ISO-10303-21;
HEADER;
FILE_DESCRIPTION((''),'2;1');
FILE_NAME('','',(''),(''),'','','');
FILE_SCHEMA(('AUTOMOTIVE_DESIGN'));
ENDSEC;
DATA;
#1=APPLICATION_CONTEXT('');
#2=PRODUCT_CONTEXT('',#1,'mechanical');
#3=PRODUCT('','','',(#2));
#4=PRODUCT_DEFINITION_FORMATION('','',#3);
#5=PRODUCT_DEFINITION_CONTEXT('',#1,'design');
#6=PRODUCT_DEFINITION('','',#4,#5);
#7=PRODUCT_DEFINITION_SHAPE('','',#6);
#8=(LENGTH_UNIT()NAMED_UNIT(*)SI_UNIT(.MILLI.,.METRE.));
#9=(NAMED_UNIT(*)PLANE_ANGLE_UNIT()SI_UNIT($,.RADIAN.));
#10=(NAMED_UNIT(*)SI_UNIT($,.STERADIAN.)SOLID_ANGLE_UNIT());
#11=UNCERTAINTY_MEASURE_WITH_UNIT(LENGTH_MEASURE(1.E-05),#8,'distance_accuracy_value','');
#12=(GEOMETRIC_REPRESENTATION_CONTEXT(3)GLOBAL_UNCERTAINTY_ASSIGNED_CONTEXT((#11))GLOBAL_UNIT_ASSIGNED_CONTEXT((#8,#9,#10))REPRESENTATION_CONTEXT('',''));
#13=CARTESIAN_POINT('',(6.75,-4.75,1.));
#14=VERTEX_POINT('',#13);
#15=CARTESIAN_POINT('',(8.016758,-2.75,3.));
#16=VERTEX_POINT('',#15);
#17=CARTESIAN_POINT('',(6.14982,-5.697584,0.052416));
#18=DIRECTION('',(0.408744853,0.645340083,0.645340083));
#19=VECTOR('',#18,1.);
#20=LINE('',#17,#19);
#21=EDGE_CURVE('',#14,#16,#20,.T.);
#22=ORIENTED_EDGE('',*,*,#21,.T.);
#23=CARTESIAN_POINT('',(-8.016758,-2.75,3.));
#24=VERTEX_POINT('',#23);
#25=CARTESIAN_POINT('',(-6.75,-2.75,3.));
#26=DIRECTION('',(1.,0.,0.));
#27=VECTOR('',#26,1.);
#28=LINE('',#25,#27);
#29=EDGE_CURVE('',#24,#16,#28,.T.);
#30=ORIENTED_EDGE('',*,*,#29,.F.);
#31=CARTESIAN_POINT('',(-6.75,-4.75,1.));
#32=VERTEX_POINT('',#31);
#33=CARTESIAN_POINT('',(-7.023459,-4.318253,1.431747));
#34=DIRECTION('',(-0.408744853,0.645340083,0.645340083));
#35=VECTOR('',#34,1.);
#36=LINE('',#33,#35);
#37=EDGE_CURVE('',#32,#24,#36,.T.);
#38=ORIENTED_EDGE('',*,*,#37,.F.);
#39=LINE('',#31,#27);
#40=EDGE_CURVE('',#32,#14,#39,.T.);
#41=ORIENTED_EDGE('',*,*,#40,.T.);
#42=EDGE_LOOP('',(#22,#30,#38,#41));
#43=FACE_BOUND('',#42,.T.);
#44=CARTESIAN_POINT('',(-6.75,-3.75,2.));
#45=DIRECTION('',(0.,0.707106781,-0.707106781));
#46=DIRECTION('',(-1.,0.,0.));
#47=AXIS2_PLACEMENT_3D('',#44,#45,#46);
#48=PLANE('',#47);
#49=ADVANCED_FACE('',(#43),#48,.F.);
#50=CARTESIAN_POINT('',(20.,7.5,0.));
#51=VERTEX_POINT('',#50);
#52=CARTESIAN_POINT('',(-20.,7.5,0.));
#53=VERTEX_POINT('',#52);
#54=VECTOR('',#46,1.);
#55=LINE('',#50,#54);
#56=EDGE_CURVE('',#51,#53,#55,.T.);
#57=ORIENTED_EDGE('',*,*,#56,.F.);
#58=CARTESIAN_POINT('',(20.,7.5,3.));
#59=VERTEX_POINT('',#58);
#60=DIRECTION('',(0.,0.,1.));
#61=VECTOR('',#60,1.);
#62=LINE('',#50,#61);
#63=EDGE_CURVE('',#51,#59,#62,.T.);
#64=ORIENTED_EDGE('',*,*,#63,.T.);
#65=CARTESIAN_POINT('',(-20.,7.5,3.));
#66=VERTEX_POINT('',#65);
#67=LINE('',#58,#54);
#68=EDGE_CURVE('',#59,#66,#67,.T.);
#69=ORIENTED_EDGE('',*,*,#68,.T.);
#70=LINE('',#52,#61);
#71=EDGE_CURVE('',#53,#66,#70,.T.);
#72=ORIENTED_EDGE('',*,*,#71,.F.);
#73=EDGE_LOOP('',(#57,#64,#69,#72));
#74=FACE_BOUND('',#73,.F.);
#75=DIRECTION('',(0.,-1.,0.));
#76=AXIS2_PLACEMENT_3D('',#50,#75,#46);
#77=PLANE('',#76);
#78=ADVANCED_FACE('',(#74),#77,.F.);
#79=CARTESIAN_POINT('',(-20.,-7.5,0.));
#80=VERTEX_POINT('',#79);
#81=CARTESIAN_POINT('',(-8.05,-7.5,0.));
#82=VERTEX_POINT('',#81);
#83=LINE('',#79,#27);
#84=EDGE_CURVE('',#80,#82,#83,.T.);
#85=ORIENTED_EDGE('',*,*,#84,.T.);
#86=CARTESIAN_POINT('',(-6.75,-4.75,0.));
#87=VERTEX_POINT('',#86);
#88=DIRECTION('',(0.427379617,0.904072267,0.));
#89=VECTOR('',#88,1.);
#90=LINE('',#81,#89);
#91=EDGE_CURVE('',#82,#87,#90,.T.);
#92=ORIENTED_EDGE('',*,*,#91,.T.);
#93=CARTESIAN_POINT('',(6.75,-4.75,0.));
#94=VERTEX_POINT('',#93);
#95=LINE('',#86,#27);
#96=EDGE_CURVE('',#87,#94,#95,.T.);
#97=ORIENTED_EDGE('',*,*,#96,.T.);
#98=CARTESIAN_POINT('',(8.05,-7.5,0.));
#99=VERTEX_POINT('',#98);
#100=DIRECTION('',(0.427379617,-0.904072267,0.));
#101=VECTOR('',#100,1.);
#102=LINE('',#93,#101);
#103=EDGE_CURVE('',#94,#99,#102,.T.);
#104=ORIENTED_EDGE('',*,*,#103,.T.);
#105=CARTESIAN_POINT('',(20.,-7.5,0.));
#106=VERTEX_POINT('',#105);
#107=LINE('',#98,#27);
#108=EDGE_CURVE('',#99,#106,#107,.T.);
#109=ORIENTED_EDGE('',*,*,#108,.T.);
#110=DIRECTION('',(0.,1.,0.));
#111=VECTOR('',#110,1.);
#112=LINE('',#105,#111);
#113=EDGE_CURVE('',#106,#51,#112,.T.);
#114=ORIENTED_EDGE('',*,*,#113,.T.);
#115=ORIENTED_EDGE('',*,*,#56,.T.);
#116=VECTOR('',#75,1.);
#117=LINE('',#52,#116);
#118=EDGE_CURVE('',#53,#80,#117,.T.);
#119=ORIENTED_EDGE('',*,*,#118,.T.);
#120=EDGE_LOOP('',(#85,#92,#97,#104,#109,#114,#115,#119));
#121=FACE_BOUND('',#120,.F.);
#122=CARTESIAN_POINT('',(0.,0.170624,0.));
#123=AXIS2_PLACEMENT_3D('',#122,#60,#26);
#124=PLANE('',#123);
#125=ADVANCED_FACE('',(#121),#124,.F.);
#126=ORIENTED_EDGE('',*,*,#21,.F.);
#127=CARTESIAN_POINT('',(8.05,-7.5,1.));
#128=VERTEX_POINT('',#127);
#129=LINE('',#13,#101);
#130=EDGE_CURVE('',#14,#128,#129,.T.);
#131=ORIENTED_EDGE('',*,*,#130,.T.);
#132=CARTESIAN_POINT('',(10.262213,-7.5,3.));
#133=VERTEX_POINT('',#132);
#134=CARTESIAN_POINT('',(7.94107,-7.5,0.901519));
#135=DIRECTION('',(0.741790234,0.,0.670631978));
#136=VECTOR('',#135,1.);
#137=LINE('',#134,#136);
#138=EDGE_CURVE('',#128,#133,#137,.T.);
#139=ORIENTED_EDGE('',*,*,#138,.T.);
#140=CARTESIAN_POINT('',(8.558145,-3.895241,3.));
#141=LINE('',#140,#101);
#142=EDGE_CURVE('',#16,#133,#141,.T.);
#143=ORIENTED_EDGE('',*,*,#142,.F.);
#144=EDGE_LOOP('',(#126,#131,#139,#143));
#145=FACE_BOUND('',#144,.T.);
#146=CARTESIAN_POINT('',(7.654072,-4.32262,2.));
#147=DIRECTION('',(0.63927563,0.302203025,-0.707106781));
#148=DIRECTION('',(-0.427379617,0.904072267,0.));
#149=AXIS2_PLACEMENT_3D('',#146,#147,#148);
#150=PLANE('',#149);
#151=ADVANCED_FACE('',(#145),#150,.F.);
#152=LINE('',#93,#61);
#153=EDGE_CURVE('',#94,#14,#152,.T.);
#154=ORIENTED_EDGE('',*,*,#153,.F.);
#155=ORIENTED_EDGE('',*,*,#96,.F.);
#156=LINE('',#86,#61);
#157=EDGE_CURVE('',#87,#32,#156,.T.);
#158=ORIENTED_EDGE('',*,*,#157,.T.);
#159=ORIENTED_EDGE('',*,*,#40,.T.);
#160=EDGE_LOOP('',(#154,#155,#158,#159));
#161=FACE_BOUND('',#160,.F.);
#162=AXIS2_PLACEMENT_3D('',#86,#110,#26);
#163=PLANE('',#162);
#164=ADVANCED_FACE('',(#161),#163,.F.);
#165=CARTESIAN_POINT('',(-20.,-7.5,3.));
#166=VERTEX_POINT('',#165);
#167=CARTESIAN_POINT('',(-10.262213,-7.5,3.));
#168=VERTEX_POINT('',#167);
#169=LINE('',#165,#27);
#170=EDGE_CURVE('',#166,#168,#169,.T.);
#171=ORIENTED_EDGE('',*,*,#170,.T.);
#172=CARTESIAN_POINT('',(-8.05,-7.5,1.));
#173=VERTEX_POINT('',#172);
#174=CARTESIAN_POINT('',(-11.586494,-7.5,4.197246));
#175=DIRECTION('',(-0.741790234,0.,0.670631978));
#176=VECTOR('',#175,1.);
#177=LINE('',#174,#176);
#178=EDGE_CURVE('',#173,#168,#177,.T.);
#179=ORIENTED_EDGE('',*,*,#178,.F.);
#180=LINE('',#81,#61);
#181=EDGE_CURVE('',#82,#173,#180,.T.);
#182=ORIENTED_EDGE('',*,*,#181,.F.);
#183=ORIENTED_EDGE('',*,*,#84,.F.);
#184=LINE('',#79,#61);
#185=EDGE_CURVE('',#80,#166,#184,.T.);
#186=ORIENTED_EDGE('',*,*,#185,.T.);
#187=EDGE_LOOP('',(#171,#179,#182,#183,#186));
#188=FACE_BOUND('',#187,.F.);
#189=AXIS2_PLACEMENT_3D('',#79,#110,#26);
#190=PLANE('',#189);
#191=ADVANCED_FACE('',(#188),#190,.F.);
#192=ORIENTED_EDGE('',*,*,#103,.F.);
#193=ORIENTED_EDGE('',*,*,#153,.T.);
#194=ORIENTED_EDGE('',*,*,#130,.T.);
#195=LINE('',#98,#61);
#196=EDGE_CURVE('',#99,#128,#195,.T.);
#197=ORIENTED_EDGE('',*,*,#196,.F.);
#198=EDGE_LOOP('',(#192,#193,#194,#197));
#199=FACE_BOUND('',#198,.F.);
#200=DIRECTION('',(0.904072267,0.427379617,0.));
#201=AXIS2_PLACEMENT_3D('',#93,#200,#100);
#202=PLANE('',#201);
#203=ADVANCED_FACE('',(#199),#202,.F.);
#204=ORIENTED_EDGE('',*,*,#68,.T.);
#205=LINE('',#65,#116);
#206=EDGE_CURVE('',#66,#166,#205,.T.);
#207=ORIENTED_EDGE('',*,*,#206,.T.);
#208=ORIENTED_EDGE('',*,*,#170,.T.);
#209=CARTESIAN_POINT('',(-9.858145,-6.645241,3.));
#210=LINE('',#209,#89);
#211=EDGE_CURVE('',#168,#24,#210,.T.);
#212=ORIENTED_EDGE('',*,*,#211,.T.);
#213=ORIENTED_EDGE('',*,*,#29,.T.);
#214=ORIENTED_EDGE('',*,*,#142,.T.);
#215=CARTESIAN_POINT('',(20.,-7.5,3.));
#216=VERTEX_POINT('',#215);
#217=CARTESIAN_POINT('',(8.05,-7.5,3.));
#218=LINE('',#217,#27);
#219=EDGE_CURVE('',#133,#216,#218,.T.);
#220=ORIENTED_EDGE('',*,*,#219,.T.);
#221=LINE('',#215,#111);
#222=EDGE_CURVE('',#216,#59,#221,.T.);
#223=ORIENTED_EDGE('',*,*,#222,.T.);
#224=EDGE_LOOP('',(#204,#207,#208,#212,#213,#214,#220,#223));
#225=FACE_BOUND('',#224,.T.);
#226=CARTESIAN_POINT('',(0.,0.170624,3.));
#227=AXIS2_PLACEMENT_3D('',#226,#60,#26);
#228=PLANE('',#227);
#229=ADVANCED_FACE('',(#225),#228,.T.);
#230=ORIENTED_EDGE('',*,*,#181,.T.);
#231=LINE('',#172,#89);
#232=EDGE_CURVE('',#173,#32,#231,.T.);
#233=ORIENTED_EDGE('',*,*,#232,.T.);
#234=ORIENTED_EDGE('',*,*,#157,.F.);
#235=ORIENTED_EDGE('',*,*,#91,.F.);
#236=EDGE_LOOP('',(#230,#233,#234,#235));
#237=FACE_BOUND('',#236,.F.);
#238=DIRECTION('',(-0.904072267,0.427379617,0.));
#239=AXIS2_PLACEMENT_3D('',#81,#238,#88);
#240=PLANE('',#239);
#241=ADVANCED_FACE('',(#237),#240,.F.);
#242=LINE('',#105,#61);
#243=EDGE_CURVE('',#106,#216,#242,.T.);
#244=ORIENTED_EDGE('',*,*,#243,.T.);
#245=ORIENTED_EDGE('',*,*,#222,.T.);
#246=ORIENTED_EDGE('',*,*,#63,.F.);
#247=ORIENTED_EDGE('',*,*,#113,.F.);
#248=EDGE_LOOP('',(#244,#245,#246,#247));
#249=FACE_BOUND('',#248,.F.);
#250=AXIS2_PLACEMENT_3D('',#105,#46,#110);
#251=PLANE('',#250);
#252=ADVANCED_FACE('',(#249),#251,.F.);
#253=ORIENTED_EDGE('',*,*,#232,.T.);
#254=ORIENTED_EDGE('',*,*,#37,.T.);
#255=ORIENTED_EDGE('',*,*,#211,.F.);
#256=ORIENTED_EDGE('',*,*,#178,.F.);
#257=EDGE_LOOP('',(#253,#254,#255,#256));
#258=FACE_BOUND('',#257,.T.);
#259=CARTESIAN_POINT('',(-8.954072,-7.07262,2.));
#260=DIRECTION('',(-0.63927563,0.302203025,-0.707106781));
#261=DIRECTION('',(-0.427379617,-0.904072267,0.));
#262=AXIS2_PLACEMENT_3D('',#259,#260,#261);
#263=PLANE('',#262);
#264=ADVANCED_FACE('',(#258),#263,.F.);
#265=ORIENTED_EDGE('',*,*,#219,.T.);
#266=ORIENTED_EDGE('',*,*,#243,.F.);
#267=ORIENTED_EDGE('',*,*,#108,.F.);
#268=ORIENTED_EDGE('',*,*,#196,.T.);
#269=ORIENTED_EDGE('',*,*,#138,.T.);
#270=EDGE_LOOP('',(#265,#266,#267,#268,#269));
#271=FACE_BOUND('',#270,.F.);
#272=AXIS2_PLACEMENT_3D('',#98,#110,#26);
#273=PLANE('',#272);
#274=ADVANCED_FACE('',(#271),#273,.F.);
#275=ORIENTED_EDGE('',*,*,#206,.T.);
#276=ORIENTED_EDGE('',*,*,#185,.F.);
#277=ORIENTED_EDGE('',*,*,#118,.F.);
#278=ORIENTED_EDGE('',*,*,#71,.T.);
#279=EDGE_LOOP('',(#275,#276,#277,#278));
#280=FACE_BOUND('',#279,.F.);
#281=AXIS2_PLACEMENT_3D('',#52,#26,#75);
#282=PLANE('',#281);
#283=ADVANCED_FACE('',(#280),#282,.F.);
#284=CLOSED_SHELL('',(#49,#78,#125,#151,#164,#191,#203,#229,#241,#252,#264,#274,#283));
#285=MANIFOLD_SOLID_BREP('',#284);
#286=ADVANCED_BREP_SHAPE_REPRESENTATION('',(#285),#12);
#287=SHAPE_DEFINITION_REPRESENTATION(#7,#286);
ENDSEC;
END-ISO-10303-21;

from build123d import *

# Parameters (mm, degrees)
F1_DEPTH = 3
F2_SIZE  = 2


# Not quite as in the source:
# - a feature names something its author has since deleted; it is built from what else it names


with BuildPart() as f1:
    # F0 (on Top) → F1 (new body)
    with BuildSketch(Plane.XY):
        Polygon((8.05, -7.5), (20, -7.5), (20, 7.5), (-20, 7.5), (-20, -7.5), (-8.05, -7.5), (-6.75, -4.75), (0, -4.75), (6.75, -4.75), align=None)
    extrude(amount=F1_DEPTH)

    # F2
    f2_edges = [f1.edges().sort_by_distance(p)[0] for p in [
        (-7.4, -6.125, 3),
        (0, -4.75, 3),
        (7.4, -6.125, 3),
    ]]
    chamfer(f2_edges, length=F2_SIZE)


solid = f1.part
